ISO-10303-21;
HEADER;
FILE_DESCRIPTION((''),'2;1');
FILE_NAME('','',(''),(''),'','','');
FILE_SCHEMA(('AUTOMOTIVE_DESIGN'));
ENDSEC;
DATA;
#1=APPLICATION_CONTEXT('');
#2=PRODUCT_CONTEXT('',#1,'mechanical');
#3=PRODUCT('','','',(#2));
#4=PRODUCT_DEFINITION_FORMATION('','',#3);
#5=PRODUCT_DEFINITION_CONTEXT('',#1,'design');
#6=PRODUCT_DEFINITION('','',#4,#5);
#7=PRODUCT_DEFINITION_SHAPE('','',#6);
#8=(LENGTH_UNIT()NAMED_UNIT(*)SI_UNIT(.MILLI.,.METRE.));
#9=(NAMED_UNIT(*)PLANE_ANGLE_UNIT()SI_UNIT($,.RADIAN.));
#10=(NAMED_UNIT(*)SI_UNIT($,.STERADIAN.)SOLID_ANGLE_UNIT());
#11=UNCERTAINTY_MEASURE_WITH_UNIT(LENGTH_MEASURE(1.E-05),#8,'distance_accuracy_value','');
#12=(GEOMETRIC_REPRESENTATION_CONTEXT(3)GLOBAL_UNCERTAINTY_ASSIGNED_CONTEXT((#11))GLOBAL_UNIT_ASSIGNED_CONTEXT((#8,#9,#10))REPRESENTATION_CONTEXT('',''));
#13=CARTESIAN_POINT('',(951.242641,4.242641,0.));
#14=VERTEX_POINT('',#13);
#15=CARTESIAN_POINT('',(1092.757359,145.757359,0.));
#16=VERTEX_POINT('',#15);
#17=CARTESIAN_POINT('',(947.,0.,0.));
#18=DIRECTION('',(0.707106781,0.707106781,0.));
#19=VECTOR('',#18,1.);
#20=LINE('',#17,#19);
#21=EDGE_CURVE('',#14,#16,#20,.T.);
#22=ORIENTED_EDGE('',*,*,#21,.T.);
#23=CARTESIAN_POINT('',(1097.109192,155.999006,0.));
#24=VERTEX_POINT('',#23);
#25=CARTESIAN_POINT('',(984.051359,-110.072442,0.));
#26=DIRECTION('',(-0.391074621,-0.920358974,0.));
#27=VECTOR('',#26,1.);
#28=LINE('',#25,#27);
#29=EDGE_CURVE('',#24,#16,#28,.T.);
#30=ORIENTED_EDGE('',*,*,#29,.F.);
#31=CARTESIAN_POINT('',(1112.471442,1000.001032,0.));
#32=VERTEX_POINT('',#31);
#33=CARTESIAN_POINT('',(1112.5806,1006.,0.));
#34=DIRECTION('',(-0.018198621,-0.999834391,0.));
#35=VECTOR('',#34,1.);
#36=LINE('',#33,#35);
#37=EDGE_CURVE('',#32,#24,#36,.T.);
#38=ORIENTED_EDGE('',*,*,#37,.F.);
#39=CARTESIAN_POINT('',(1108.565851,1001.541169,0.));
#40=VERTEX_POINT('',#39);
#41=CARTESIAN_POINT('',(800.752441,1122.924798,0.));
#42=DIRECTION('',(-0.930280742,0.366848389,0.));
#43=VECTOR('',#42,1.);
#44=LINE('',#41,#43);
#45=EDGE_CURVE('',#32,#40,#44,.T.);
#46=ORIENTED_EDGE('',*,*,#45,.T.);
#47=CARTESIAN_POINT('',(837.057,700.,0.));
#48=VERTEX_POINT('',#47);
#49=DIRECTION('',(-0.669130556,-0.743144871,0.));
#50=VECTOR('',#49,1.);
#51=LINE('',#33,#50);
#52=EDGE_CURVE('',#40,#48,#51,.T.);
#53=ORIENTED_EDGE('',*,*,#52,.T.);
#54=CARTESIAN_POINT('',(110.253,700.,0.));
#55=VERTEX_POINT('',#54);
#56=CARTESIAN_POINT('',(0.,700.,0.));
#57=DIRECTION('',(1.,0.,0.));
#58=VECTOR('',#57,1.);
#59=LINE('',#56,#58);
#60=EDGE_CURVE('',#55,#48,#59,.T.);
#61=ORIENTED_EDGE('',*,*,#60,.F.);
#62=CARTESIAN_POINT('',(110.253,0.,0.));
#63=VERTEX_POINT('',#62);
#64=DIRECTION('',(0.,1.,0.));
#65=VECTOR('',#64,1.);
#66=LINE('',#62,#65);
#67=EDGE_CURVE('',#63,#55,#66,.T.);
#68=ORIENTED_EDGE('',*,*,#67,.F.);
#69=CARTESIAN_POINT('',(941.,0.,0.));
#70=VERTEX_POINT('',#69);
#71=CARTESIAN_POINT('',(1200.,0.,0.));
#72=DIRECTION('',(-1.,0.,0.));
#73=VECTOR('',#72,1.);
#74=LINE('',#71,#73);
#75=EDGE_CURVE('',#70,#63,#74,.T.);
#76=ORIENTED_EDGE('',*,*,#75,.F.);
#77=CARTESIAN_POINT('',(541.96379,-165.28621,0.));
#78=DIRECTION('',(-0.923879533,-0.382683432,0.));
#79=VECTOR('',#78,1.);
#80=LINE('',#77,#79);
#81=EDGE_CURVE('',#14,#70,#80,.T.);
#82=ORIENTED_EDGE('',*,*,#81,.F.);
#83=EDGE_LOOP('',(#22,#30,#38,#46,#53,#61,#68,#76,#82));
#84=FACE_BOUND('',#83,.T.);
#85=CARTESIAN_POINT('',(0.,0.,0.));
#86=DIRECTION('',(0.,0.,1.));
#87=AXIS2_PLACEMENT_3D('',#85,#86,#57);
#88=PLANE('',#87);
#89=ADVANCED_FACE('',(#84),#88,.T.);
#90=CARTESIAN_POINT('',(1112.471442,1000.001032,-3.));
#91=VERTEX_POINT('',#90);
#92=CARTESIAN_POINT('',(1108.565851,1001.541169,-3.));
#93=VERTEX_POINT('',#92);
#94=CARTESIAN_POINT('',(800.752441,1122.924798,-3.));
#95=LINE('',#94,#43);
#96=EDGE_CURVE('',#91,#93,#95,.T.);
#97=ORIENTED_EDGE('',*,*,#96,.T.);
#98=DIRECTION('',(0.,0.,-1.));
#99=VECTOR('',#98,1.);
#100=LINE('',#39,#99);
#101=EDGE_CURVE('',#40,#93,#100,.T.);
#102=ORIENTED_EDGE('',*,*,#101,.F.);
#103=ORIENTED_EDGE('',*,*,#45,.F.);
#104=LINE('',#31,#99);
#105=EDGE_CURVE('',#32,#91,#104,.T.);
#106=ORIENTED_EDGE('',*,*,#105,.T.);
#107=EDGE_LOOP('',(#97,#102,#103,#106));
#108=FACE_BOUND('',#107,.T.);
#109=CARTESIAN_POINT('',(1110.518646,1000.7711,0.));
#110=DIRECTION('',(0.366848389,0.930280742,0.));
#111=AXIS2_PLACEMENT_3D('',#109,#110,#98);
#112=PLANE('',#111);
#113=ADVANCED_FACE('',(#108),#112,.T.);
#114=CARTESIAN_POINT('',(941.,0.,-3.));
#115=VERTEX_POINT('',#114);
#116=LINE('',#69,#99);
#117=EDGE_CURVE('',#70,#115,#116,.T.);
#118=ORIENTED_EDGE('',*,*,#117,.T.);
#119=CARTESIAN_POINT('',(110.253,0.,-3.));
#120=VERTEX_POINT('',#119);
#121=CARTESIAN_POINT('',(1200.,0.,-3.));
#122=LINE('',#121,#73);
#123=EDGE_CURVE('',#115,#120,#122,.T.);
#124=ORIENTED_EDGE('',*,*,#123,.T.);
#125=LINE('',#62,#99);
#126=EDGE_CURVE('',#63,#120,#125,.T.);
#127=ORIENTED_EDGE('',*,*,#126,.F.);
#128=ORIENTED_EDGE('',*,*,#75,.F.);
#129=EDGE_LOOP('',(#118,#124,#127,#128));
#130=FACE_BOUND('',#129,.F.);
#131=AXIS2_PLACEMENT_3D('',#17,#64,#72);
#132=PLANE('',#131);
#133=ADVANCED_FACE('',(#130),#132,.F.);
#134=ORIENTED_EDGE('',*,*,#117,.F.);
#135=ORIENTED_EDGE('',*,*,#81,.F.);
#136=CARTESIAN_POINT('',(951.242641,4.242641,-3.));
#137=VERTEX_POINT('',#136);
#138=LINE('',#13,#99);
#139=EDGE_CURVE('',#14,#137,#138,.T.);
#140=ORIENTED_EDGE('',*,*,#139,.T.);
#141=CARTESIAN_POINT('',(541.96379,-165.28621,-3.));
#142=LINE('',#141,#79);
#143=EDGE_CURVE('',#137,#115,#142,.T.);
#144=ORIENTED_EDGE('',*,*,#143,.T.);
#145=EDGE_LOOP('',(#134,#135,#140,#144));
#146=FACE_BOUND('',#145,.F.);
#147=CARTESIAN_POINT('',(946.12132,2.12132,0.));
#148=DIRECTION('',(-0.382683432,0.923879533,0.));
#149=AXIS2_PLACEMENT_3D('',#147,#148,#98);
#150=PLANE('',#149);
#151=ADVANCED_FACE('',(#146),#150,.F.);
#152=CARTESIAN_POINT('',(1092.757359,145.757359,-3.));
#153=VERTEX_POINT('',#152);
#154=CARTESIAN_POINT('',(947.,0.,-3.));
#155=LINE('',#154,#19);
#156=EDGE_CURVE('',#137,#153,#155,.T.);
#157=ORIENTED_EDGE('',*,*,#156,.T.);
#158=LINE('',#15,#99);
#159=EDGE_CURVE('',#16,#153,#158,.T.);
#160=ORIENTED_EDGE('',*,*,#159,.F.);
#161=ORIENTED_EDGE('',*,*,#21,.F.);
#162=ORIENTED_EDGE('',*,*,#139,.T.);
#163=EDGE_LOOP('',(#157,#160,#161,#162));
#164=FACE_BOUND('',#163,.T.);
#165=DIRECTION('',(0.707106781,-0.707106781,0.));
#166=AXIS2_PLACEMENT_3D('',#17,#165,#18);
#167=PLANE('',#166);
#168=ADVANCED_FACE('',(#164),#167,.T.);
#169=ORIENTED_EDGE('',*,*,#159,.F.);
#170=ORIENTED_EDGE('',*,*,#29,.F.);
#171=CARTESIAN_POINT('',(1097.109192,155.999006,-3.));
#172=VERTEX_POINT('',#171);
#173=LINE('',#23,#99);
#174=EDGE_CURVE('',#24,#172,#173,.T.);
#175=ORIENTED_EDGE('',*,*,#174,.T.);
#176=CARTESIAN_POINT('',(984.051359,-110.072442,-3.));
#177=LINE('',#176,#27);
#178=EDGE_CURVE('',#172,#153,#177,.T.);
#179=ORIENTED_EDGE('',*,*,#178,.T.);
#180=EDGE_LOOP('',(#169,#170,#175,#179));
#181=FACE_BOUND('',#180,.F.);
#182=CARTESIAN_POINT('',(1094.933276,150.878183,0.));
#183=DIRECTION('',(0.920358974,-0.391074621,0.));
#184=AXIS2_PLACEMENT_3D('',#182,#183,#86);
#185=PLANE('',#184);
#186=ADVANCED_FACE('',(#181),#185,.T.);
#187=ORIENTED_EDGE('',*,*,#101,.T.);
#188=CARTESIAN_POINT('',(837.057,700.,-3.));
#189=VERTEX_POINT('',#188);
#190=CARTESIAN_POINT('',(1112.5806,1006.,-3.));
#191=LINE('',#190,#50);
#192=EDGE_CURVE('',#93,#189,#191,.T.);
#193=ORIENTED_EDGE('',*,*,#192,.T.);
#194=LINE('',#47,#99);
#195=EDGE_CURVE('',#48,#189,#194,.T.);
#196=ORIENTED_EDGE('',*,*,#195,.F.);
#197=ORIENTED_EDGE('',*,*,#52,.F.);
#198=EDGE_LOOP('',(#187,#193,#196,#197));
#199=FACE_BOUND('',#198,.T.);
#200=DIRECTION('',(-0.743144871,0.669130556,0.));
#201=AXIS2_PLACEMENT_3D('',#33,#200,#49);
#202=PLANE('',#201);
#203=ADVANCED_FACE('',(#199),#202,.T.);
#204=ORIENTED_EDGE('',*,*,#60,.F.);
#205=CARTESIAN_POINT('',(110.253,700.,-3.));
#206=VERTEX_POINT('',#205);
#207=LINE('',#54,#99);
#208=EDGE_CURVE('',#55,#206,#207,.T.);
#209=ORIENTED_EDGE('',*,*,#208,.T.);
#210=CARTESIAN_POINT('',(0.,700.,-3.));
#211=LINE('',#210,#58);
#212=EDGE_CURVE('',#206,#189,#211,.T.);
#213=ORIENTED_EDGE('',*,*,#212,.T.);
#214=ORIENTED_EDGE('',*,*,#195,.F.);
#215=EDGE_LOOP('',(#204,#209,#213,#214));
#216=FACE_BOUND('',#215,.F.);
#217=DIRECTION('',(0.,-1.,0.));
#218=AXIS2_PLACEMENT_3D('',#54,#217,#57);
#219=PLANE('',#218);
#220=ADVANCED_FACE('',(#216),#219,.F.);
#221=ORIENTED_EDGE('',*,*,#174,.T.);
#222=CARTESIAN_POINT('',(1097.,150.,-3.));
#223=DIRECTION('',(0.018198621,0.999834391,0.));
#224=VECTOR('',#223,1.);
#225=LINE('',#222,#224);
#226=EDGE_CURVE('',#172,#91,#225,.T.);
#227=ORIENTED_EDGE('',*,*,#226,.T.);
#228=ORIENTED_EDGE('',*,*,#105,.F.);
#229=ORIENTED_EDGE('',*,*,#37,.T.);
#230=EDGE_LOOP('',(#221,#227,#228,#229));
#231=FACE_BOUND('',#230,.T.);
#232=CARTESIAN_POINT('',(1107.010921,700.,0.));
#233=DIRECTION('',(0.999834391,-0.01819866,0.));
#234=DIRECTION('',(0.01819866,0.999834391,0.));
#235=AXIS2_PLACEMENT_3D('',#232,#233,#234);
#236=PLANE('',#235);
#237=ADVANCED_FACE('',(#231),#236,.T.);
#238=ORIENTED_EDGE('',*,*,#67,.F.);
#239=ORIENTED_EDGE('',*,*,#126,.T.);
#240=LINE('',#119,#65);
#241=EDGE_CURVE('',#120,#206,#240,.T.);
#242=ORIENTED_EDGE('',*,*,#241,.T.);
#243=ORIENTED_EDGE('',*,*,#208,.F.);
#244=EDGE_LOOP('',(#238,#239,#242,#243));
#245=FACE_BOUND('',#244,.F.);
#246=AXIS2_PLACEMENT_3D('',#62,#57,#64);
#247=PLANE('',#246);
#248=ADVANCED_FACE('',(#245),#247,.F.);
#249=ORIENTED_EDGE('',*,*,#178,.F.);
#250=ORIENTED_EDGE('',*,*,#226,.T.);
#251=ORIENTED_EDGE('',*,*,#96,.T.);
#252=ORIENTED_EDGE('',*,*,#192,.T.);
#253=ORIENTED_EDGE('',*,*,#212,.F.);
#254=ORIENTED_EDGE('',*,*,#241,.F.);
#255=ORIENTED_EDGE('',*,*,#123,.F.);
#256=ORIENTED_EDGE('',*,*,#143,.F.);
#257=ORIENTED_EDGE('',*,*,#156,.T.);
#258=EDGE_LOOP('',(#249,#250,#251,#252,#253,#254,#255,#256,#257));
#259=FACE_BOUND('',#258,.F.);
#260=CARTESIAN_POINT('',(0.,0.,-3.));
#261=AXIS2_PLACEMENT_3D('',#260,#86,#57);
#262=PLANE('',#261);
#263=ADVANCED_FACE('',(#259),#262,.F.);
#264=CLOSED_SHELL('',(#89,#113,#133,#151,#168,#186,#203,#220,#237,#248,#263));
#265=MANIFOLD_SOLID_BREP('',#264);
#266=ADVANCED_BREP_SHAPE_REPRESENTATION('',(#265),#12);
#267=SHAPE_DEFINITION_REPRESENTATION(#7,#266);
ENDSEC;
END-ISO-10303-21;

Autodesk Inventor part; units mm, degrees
ref_plane "YZ Plane" through (0, 0, 0) normal (1, 0, 0) x (0, 1, 0)
ref_plane "XZ Plane" through (0, 0, 0) normal (0, 1, 0) x (-1, 0, 0)
ref_plane "XY Plane" through (0, 0, 0) normal (0, 0, 1) x (1, 0, 0)
sketch "Sketch8" plane through (0, 0, 0) normal (0, 0, 1) x (1, 0, 0)
  line L0 (0, 2897) -> (1200, 2897)
  line L1 (1200, 2897) -> (1200, 0)
  line L2 (1200, 0) -> (0, 0)
  line L3 (0, 0) -> (0, 2897)
  line L4 (0, 2897) -> (1200, 0) construction
  line L5 (1200, 2897) -> (0, 0) construction
  line L6 (947, 0) -> (1097, 150)
  line L7 (1097, 150) -> (1147, 2897)
  line L8 (0, 700) -> (1200, 700)
  line L9 (1112.5806, 1006) -> (837.057, 700)
  line L10 (110.253, 0) -> (110.253, 700)
  point P0 (600, 1448.5)
  point P1 (1107.0109, 700)
  dimension "d43" = 1200
  dimension "d44" = 2897
  dimension "d45" = 53
  dimension "d46" = 947
  dimension "d47" = 150
  dimension "d48" = 103
  dimension "d49" = 700
  dimension "d55" = 306
  dimension "d57" = 110.253
  dimension "d61" = 48
extrude "Plate4" add sketch "Sketch8" against normal blind 3 contours L7 L8 L9 | L8 L7 L6 L2 L10
chamfer "Corner Chamfer1" distance 6 angle 45 2 edges at (947, 0, -1.5) (1097, 150, -1.5)
chamfer "Corner Chamfer2" distance 6 angle 45 1 edges at (1112.5806, 1006, -1.5)
equation "\"d50\" = Thickness"
equation "\"BendReliefWidth\" = Thickness"
equation "\"BendReliefDepth\" = 0.5 * Thickness"
equation "\"CornerReliefSize\" = 4 * Thickness"
equation "\"MinimumRemnant\" = 2 * Thickness"
equation "\"TransitionRadius\" = BendRadius"
equation "\"JacobiRadiusSize\" = BendRadius"
equation "\"GapSize\" = Thickness"
equation "\"Thickness\" = 3"
equation "\"BendRadius\" = 5"
properties part number "BSH 015 board cone 5" material "09g2s"
